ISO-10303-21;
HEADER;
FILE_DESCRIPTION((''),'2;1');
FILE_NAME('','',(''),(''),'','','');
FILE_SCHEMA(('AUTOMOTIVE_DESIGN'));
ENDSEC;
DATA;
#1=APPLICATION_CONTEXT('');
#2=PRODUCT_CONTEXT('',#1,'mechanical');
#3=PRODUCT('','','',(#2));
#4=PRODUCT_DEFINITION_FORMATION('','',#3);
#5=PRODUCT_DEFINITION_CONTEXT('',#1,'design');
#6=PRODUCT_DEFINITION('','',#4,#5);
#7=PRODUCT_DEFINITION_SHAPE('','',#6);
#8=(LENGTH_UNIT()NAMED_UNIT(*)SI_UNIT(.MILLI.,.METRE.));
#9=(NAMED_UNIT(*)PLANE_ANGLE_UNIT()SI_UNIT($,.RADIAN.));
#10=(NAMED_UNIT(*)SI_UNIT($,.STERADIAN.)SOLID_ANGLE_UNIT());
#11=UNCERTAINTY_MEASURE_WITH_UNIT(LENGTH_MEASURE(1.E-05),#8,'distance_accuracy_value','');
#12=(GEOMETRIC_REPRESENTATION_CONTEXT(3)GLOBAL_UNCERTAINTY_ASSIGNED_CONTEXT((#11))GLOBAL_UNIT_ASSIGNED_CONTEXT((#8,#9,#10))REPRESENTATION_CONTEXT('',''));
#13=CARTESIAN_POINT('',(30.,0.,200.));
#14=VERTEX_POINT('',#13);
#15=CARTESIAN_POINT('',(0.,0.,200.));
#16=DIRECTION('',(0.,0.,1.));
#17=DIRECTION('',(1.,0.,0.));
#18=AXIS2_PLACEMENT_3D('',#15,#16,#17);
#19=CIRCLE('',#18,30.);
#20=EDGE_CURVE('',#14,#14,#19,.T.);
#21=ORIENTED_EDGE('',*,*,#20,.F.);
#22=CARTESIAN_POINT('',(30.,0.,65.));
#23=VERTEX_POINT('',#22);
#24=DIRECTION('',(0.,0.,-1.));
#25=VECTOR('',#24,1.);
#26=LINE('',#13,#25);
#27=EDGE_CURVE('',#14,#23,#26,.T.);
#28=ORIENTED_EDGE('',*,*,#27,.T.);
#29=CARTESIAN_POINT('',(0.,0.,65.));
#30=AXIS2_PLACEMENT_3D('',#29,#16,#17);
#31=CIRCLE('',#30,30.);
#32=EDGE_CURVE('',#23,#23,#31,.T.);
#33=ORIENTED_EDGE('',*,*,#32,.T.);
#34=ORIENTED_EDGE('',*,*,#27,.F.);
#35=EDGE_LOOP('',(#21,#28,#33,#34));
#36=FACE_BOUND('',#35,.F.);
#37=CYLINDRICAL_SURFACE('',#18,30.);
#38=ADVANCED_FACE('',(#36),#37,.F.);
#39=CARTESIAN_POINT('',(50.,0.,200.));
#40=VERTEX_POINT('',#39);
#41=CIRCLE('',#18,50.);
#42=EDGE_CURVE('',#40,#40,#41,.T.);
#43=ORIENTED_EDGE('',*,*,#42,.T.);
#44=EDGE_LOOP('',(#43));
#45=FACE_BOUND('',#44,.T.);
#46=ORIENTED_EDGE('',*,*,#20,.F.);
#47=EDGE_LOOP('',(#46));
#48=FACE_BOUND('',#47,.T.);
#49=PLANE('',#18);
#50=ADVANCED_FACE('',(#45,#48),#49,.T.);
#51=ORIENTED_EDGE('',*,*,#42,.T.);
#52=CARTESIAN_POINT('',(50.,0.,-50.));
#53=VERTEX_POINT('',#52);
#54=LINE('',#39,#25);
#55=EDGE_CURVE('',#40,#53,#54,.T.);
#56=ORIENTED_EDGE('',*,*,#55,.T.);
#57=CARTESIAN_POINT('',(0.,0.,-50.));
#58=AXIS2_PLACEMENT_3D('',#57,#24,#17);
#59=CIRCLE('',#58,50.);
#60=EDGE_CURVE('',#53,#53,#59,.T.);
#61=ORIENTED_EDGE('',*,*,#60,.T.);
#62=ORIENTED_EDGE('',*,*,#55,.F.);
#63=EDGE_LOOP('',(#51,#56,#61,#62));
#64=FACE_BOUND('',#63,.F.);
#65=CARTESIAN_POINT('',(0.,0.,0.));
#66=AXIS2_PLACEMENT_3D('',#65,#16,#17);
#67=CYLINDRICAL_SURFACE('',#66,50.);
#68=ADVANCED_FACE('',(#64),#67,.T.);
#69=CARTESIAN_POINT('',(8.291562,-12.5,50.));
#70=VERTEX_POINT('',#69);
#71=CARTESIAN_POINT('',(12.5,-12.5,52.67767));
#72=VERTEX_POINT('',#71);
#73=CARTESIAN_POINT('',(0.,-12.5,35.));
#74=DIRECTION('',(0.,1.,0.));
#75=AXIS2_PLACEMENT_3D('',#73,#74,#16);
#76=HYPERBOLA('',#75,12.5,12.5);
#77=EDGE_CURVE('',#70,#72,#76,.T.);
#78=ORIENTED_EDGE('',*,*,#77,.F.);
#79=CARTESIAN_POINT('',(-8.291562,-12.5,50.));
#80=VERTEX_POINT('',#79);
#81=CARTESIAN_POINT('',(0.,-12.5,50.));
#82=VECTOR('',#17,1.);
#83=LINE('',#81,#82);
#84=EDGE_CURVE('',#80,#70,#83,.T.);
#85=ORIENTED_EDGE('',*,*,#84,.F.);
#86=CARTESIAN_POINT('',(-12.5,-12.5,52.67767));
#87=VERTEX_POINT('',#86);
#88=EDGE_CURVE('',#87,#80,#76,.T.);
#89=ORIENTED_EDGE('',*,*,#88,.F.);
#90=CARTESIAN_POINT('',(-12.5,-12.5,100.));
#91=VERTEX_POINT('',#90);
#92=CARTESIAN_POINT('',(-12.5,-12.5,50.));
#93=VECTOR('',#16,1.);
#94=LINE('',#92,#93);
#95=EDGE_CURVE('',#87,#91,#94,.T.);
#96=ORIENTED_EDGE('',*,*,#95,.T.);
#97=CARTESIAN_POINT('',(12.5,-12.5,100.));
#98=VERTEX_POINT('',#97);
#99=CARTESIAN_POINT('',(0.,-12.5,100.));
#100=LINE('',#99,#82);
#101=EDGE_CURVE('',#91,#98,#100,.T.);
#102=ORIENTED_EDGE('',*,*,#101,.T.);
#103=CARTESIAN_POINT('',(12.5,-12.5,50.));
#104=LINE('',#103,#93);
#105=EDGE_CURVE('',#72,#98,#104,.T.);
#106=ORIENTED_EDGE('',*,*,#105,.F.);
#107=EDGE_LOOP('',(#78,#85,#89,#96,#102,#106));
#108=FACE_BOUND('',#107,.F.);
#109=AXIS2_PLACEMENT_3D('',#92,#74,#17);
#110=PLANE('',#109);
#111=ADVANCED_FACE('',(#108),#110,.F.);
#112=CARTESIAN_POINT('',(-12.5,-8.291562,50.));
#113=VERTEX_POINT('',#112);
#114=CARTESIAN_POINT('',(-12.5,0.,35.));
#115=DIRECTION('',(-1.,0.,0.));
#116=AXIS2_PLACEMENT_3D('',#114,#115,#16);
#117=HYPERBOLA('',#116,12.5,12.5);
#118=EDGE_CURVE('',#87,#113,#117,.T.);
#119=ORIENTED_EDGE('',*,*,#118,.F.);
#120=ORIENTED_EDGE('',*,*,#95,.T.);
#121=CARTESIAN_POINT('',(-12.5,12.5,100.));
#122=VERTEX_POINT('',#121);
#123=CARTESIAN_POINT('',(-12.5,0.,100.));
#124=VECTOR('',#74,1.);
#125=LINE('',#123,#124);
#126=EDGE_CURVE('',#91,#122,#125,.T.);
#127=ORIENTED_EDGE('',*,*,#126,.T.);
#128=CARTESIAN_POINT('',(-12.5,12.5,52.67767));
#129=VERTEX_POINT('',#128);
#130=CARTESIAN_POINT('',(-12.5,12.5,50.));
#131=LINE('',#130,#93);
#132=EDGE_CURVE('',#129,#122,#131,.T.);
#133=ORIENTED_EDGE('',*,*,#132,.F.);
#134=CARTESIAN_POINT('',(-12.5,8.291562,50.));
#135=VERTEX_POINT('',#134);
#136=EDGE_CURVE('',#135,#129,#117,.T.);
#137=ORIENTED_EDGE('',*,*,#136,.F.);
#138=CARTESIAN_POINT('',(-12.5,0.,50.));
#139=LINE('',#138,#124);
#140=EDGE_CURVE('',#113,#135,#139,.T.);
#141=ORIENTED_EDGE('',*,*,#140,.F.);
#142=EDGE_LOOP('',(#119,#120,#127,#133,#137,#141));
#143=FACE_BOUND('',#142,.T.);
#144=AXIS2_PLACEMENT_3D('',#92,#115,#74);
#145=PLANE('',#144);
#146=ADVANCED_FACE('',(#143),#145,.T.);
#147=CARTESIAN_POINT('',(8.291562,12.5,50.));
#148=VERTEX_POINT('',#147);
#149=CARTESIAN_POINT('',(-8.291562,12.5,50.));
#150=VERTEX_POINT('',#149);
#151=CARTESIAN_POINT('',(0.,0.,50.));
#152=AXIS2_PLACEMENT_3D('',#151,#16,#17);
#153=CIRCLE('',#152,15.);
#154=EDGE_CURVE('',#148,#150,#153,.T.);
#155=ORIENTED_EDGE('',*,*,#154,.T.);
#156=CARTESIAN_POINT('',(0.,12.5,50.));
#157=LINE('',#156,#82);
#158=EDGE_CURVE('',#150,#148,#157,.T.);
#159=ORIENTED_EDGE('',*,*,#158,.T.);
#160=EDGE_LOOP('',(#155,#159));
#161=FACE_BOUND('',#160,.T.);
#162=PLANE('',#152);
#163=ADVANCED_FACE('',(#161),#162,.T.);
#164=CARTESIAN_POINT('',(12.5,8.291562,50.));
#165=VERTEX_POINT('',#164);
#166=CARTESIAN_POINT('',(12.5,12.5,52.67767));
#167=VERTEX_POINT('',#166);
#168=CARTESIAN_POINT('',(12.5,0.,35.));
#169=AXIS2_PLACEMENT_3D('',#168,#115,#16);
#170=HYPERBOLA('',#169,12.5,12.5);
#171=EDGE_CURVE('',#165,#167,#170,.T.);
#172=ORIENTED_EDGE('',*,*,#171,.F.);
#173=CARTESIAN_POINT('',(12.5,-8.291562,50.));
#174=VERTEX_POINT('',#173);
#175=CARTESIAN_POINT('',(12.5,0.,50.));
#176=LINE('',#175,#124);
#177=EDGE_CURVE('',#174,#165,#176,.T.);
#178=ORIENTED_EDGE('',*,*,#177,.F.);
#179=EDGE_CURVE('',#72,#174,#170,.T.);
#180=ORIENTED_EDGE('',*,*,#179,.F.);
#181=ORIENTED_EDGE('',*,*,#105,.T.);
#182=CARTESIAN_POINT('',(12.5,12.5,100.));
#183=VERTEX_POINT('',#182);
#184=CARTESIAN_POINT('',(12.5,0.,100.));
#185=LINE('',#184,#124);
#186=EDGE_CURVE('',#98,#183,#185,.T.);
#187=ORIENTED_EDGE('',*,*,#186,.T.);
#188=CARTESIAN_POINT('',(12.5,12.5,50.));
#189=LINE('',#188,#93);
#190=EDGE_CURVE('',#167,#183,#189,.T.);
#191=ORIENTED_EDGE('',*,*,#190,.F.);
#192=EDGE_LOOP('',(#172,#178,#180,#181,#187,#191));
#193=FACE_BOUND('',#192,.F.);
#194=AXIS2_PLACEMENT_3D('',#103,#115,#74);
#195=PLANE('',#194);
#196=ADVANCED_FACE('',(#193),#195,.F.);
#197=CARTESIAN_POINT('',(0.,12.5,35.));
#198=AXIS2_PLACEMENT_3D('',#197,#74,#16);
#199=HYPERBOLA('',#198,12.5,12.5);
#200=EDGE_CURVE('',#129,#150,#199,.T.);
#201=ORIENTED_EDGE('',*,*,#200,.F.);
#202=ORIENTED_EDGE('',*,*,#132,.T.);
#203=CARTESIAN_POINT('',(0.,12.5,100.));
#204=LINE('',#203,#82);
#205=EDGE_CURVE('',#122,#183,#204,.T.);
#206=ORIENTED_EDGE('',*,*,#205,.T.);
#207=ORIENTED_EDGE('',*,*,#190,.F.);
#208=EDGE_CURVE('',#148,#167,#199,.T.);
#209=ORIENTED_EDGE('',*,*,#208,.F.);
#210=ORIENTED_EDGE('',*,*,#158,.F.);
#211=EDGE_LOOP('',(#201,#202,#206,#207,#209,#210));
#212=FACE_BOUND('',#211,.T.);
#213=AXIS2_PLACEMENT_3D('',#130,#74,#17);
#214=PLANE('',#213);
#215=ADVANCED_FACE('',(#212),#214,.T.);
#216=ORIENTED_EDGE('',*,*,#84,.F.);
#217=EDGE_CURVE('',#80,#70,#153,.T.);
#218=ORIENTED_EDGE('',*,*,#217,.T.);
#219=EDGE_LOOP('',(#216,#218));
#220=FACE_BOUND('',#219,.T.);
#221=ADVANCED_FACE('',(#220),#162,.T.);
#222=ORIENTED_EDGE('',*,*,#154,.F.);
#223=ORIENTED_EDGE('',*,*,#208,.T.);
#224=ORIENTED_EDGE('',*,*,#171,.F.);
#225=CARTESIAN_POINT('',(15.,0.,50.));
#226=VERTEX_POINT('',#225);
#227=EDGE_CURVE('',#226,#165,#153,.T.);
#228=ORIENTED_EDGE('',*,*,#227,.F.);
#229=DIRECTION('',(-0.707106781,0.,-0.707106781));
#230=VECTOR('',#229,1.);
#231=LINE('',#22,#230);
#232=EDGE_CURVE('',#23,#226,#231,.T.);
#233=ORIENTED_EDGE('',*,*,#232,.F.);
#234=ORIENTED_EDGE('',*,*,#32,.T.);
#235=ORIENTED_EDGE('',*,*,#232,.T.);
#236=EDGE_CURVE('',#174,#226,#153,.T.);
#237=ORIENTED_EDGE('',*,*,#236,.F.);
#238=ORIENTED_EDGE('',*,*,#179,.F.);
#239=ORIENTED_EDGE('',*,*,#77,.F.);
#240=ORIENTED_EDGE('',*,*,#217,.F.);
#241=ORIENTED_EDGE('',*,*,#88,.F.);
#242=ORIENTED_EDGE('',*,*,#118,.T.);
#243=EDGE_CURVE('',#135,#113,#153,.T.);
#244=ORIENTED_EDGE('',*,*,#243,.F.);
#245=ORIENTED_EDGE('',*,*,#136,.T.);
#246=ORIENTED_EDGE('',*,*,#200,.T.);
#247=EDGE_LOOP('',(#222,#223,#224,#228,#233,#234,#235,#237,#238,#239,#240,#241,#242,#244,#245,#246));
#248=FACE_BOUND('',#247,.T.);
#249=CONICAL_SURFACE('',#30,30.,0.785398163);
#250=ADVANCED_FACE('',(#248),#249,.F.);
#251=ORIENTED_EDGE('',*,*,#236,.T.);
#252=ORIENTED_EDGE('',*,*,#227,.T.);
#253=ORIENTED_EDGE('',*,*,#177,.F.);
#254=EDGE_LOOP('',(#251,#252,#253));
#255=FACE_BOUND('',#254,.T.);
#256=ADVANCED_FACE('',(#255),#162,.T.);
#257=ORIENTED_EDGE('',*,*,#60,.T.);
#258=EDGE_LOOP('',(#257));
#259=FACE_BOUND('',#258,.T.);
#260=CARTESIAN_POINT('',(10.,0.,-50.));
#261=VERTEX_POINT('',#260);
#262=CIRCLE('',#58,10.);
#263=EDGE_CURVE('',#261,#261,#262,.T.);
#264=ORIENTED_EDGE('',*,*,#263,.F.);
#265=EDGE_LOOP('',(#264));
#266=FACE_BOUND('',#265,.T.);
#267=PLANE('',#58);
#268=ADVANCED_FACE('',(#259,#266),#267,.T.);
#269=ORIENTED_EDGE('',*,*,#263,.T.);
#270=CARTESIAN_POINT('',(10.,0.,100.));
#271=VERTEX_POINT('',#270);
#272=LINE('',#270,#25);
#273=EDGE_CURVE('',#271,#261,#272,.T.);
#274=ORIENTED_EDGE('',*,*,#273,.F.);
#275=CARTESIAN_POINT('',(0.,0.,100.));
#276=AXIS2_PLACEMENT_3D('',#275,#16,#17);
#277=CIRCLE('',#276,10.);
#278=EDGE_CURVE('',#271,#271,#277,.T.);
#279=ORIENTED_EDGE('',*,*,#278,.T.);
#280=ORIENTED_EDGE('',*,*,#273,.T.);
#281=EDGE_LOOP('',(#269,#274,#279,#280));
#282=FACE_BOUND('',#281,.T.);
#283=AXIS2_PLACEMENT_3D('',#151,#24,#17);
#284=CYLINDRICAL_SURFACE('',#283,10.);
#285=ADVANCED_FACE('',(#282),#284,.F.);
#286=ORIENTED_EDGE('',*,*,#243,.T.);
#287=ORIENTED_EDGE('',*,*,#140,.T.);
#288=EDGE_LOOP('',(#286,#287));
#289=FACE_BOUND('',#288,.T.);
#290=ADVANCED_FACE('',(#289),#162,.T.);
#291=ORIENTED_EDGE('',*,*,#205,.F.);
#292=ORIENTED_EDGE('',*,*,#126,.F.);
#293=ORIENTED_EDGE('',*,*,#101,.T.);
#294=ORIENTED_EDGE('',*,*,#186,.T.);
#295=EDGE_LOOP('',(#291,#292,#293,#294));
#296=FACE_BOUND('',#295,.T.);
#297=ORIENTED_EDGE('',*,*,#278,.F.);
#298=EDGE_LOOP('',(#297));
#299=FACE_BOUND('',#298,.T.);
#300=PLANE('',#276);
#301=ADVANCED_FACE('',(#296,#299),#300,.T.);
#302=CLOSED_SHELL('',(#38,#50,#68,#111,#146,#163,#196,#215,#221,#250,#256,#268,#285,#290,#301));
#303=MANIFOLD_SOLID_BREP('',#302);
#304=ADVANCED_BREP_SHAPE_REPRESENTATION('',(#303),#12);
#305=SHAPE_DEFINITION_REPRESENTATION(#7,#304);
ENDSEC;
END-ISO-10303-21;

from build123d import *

# Parameters (mm, degrees)
F0_R       = 50
F1_DEPTH   = 200
F2_R       = 30
F3_DEPTH   = 150
F1_FACE1_R = 50
F4_R       = 10
F5_DEPTH   = 50
F6_R       = 10
F7_DEPTH   = 150
F8_W       = 25
F8_H       = 25
F8_R       = 10
F9_DEPTH   = 50


# Not quite as in the source:
# - a fillet or chamfer that OpenCascade refuses, or shapes differently, is made with other operations: its cross-section is extruded or revolved along the edge and cut away or added


with BuildPart() as f1:
    # F0 (on Top) → F1 (new body)
    with BuildSketch(Plane.XY):
        Circle(F0_R)
    extrude(amount=F1_DEPTH)

    # F2 (on face) → F3 (cut)
    with BuildSketch(Plane.XY.offset(200)):
        Circle(F2_R)
    extrude(amount=-F3_DEPTH, mode=Mode.SUBTRACT)

    # F1_face1 (on face) + F4 (on face) → F5 (join)
    with BuildSketch(Plane(origin=(0, 0, 0), x_dir=(1, 0, 0), z_dir=(0, 0, -1))):
        Circle(F1_FACE1_R)
    with BuildSketch(Plane(origin=(0, 0, 0), x_dir=(1, 0, 0), z_dir=(0, 0, -1))):
        Circle(F4_R)
    extrude(amount=F5_DEPTH)

    # F6 (on face) → F7 (cut)
    with BuildSketch(Plane(origin=(0, 0, -50), x_dir=(1, 0, 0), z_dir=(0, 0, -1))):
        Circle(F6_R)
    extrude(amount=-F7_DEPTH, mode=Mode.SUBTRACT)

    # F8 (on face) → F9 (join)
    with BuildSketch(Plane.XY.offset(50)):
        Rectangle(F8_W, F8_H)
        Circle(F8_R, mode=Mode.SUBTRACT)
    extrude(amount=F9_DEPTH)

    # F10: chamfer of 15 on 1 edges, made by hand

    # F10_s1 → F10_t2 (revolve)
    with BuildSketch(Plane.XZ):
        Polygon((30, 65), (15, 50), (30, 50), align=None)
    revolve(axis=Axis((0, 0, 50), (0, 0, 1)))


solid = f1.part
